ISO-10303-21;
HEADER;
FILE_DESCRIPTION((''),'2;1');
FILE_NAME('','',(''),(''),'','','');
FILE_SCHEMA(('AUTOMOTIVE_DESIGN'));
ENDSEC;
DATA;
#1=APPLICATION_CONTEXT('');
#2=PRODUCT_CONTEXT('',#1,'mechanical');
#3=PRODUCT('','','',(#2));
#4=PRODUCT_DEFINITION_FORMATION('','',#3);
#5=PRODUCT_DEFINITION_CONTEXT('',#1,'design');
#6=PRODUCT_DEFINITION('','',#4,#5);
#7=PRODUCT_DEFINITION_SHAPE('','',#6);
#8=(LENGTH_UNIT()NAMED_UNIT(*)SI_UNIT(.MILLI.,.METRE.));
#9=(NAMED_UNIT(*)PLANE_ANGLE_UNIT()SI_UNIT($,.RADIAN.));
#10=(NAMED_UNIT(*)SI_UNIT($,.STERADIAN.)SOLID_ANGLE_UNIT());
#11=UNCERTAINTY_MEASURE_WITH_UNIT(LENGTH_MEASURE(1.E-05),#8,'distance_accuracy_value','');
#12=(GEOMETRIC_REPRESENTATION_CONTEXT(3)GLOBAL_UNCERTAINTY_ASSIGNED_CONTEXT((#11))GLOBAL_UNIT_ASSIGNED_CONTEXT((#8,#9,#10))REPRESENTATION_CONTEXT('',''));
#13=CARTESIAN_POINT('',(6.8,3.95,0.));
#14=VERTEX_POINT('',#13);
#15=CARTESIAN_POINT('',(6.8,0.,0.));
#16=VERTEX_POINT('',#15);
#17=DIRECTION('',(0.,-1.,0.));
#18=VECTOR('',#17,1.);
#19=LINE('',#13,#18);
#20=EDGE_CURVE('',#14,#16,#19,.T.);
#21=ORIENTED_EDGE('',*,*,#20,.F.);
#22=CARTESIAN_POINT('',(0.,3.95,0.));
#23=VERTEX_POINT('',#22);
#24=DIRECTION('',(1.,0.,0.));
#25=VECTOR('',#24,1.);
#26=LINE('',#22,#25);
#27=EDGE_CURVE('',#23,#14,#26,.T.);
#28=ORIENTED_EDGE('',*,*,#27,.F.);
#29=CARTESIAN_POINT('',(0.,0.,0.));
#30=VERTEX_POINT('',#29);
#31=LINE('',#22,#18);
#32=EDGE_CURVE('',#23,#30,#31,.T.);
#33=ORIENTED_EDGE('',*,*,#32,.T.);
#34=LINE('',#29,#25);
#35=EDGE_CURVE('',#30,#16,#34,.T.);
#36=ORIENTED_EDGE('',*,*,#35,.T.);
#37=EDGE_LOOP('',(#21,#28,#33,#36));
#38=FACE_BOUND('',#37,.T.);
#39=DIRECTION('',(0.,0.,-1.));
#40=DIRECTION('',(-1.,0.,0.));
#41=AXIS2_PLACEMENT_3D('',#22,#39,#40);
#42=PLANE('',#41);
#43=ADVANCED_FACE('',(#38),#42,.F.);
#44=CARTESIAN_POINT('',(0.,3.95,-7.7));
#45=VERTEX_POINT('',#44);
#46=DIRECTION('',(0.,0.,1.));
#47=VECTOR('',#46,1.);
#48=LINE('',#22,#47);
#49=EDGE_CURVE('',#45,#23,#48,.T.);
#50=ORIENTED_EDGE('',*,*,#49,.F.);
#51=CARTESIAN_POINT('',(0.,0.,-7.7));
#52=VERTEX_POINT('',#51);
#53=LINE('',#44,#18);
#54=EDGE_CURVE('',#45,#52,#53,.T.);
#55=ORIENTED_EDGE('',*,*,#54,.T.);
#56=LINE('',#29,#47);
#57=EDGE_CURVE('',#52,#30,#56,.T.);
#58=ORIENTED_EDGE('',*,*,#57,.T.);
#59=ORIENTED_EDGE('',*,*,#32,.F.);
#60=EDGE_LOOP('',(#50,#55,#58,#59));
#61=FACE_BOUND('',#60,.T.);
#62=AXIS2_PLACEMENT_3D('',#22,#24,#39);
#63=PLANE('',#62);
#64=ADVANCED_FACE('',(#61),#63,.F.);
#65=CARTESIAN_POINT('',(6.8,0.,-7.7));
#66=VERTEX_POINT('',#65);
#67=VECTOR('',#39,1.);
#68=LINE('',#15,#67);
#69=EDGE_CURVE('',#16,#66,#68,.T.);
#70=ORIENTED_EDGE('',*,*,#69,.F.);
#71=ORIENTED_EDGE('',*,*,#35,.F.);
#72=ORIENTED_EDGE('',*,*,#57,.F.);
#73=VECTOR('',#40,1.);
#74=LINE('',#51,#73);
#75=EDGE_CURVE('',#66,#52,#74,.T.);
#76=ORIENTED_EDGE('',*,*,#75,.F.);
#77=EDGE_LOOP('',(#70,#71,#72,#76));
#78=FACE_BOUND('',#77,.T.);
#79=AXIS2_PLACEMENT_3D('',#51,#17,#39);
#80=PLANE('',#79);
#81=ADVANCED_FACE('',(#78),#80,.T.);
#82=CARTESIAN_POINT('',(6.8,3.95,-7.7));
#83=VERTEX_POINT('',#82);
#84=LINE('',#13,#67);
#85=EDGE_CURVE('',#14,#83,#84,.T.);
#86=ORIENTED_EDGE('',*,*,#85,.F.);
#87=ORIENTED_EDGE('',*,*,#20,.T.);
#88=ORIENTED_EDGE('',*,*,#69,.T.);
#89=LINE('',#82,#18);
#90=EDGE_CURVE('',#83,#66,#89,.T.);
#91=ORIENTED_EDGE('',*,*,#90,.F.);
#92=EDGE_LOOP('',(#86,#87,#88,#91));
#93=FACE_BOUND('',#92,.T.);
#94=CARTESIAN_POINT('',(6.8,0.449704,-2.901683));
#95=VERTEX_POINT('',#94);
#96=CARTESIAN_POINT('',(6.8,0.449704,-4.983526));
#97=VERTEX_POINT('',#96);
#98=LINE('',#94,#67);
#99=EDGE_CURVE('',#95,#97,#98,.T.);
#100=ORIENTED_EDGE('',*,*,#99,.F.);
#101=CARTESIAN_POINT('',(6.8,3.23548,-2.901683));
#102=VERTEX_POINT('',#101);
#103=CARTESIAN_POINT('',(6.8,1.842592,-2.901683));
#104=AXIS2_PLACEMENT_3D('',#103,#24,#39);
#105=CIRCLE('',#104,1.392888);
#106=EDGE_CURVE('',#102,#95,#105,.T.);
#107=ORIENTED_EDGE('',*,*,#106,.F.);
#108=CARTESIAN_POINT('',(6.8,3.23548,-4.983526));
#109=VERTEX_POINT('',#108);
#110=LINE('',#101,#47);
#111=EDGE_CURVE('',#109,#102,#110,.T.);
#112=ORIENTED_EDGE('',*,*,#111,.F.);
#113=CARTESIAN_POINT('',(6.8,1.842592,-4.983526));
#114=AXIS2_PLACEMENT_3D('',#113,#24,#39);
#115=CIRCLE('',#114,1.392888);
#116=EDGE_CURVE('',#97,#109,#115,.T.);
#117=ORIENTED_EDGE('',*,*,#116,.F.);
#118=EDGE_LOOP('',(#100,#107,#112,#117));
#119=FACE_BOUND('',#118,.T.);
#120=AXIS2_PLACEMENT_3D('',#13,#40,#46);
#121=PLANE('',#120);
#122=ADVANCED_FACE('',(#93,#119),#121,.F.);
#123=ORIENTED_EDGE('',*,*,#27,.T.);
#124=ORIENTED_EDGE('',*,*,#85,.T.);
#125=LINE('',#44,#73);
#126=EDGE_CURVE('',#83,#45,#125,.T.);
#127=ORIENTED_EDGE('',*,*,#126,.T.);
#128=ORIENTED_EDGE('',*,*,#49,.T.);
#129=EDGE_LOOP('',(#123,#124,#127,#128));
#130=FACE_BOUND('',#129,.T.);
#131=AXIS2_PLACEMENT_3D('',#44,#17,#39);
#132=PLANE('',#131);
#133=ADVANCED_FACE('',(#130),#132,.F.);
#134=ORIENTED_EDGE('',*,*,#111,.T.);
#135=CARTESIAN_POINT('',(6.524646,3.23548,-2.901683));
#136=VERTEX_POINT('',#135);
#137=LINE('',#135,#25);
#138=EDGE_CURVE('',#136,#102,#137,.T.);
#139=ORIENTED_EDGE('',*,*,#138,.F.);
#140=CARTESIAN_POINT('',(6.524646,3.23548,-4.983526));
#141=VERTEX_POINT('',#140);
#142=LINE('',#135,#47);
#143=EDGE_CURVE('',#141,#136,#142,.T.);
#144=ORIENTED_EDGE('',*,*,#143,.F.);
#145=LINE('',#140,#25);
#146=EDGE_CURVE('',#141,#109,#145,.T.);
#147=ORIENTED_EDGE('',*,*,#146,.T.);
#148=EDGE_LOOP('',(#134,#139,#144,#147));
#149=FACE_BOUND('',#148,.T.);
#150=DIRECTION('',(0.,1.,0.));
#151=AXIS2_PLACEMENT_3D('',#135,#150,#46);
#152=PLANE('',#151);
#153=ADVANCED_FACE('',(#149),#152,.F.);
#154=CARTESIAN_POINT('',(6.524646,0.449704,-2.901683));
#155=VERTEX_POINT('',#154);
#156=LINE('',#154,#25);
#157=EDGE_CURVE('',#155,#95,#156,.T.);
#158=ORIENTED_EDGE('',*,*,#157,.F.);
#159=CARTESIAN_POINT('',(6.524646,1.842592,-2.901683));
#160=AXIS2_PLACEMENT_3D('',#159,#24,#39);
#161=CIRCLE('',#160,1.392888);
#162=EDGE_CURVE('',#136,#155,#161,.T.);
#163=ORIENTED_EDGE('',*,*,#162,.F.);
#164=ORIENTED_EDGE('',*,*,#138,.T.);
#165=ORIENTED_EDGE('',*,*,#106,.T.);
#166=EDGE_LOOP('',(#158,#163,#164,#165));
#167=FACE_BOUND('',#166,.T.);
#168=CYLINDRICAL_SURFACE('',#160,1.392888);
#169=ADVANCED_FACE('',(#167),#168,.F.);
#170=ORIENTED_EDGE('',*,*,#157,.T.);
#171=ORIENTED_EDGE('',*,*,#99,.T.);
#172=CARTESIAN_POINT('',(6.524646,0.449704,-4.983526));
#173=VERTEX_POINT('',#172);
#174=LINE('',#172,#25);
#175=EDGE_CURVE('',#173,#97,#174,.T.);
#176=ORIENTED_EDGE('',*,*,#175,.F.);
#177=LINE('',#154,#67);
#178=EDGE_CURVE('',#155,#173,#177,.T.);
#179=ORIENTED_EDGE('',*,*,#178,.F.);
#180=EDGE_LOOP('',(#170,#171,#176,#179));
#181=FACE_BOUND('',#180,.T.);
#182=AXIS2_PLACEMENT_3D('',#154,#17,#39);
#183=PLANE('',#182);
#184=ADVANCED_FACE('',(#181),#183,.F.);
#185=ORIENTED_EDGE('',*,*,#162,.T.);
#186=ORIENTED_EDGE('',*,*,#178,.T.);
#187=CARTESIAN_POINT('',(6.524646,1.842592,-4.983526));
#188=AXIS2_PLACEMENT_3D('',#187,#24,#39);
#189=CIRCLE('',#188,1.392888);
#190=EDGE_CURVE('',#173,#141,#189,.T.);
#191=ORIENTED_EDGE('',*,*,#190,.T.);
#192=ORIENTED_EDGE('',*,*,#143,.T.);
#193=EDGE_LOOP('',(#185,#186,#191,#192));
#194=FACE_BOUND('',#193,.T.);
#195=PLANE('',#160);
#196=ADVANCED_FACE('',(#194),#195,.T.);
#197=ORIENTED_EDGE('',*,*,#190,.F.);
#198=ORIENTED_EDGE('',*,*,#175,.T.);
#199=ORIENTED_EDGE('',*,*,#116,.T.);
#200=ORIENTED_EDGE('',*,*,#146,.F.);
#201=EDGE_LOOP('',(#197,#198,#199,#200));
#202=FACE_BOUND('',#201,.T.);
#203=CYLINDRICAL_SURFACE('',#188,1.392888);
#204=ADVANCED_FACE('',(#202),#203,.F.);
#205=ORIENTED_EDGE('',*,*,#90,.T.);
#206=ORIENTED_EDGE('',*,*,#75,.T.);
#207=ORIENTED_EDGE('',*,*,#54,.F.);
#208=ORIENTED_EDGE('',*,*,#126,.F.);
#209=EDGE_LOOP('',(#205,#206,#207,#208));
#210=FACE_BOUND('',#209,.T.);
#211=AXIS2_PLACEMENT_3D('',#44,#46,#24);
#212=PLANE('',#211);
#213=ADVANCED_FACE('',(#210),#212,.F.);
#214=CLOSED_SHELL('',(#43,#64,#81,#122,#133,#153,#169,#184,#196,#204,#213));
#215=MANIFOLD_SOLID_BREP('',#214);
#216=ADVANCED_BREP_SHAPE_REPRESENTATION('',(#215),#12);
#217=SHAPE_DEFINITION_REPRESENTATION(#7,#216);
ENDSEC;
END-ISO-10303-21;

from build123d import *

# Parameters (mm, degrees)
SKETCH1_W           = 6.8
SKETCH1_H           = 7.7
BOSS_EXTRUDE1_DEPTH = 3.95
CUT_EXTRUDE4_START  = -0.275354201
CUT_EXTRUDE4_DEPTH  = 0.275354201


# Read off the part's stored shape, not the designer's step: Cut-Extrude4
with BuildPart() as part:
    # Sketch1 → Boss-Extrude1 (new body)
    with BuildSketch(Plane(origin=(0, 0, 0), x_dir=(1, 0, 0), z_dir=(0, 1, 0))):
        with Locations((3.4, 3.85)):
            Rectangle(SKETCH1_W, SKETCH1_H)
    extrude(amount=BOSS_EXTRUDE1_DEPTH)

    # Cut-Extrude4 outline → Cut-Extrude4 (cut)
    with BuildSketch(Plane(origin=(6.8, 0, 0), x_dir=(0, 0, -1), z_dir=(1, 0, 0)).offset(CUT_EXTRUDE4_START)):
        with BuildLine():
            Line((4.98352639, 3.235480271), (2.901682517, 3.235480271))
            ThreePointArc((2.901682517, 3.235480271), (1.50879417, 1.842591924), (2.901682517, 0.449703578))
            Line((2.901682517, 0.449703578), (4.98352639, 0.449703578))
            ThreePointArc((4.98352639, 0.449703578), (6.376414736, 1.842591924), (4.98352639, 3.235480271))
        make_face()
    extrude(amount=CUT_EXTRUDE4_DEPTH, mode=Mode.SUBTRACT)


solid = part.part
